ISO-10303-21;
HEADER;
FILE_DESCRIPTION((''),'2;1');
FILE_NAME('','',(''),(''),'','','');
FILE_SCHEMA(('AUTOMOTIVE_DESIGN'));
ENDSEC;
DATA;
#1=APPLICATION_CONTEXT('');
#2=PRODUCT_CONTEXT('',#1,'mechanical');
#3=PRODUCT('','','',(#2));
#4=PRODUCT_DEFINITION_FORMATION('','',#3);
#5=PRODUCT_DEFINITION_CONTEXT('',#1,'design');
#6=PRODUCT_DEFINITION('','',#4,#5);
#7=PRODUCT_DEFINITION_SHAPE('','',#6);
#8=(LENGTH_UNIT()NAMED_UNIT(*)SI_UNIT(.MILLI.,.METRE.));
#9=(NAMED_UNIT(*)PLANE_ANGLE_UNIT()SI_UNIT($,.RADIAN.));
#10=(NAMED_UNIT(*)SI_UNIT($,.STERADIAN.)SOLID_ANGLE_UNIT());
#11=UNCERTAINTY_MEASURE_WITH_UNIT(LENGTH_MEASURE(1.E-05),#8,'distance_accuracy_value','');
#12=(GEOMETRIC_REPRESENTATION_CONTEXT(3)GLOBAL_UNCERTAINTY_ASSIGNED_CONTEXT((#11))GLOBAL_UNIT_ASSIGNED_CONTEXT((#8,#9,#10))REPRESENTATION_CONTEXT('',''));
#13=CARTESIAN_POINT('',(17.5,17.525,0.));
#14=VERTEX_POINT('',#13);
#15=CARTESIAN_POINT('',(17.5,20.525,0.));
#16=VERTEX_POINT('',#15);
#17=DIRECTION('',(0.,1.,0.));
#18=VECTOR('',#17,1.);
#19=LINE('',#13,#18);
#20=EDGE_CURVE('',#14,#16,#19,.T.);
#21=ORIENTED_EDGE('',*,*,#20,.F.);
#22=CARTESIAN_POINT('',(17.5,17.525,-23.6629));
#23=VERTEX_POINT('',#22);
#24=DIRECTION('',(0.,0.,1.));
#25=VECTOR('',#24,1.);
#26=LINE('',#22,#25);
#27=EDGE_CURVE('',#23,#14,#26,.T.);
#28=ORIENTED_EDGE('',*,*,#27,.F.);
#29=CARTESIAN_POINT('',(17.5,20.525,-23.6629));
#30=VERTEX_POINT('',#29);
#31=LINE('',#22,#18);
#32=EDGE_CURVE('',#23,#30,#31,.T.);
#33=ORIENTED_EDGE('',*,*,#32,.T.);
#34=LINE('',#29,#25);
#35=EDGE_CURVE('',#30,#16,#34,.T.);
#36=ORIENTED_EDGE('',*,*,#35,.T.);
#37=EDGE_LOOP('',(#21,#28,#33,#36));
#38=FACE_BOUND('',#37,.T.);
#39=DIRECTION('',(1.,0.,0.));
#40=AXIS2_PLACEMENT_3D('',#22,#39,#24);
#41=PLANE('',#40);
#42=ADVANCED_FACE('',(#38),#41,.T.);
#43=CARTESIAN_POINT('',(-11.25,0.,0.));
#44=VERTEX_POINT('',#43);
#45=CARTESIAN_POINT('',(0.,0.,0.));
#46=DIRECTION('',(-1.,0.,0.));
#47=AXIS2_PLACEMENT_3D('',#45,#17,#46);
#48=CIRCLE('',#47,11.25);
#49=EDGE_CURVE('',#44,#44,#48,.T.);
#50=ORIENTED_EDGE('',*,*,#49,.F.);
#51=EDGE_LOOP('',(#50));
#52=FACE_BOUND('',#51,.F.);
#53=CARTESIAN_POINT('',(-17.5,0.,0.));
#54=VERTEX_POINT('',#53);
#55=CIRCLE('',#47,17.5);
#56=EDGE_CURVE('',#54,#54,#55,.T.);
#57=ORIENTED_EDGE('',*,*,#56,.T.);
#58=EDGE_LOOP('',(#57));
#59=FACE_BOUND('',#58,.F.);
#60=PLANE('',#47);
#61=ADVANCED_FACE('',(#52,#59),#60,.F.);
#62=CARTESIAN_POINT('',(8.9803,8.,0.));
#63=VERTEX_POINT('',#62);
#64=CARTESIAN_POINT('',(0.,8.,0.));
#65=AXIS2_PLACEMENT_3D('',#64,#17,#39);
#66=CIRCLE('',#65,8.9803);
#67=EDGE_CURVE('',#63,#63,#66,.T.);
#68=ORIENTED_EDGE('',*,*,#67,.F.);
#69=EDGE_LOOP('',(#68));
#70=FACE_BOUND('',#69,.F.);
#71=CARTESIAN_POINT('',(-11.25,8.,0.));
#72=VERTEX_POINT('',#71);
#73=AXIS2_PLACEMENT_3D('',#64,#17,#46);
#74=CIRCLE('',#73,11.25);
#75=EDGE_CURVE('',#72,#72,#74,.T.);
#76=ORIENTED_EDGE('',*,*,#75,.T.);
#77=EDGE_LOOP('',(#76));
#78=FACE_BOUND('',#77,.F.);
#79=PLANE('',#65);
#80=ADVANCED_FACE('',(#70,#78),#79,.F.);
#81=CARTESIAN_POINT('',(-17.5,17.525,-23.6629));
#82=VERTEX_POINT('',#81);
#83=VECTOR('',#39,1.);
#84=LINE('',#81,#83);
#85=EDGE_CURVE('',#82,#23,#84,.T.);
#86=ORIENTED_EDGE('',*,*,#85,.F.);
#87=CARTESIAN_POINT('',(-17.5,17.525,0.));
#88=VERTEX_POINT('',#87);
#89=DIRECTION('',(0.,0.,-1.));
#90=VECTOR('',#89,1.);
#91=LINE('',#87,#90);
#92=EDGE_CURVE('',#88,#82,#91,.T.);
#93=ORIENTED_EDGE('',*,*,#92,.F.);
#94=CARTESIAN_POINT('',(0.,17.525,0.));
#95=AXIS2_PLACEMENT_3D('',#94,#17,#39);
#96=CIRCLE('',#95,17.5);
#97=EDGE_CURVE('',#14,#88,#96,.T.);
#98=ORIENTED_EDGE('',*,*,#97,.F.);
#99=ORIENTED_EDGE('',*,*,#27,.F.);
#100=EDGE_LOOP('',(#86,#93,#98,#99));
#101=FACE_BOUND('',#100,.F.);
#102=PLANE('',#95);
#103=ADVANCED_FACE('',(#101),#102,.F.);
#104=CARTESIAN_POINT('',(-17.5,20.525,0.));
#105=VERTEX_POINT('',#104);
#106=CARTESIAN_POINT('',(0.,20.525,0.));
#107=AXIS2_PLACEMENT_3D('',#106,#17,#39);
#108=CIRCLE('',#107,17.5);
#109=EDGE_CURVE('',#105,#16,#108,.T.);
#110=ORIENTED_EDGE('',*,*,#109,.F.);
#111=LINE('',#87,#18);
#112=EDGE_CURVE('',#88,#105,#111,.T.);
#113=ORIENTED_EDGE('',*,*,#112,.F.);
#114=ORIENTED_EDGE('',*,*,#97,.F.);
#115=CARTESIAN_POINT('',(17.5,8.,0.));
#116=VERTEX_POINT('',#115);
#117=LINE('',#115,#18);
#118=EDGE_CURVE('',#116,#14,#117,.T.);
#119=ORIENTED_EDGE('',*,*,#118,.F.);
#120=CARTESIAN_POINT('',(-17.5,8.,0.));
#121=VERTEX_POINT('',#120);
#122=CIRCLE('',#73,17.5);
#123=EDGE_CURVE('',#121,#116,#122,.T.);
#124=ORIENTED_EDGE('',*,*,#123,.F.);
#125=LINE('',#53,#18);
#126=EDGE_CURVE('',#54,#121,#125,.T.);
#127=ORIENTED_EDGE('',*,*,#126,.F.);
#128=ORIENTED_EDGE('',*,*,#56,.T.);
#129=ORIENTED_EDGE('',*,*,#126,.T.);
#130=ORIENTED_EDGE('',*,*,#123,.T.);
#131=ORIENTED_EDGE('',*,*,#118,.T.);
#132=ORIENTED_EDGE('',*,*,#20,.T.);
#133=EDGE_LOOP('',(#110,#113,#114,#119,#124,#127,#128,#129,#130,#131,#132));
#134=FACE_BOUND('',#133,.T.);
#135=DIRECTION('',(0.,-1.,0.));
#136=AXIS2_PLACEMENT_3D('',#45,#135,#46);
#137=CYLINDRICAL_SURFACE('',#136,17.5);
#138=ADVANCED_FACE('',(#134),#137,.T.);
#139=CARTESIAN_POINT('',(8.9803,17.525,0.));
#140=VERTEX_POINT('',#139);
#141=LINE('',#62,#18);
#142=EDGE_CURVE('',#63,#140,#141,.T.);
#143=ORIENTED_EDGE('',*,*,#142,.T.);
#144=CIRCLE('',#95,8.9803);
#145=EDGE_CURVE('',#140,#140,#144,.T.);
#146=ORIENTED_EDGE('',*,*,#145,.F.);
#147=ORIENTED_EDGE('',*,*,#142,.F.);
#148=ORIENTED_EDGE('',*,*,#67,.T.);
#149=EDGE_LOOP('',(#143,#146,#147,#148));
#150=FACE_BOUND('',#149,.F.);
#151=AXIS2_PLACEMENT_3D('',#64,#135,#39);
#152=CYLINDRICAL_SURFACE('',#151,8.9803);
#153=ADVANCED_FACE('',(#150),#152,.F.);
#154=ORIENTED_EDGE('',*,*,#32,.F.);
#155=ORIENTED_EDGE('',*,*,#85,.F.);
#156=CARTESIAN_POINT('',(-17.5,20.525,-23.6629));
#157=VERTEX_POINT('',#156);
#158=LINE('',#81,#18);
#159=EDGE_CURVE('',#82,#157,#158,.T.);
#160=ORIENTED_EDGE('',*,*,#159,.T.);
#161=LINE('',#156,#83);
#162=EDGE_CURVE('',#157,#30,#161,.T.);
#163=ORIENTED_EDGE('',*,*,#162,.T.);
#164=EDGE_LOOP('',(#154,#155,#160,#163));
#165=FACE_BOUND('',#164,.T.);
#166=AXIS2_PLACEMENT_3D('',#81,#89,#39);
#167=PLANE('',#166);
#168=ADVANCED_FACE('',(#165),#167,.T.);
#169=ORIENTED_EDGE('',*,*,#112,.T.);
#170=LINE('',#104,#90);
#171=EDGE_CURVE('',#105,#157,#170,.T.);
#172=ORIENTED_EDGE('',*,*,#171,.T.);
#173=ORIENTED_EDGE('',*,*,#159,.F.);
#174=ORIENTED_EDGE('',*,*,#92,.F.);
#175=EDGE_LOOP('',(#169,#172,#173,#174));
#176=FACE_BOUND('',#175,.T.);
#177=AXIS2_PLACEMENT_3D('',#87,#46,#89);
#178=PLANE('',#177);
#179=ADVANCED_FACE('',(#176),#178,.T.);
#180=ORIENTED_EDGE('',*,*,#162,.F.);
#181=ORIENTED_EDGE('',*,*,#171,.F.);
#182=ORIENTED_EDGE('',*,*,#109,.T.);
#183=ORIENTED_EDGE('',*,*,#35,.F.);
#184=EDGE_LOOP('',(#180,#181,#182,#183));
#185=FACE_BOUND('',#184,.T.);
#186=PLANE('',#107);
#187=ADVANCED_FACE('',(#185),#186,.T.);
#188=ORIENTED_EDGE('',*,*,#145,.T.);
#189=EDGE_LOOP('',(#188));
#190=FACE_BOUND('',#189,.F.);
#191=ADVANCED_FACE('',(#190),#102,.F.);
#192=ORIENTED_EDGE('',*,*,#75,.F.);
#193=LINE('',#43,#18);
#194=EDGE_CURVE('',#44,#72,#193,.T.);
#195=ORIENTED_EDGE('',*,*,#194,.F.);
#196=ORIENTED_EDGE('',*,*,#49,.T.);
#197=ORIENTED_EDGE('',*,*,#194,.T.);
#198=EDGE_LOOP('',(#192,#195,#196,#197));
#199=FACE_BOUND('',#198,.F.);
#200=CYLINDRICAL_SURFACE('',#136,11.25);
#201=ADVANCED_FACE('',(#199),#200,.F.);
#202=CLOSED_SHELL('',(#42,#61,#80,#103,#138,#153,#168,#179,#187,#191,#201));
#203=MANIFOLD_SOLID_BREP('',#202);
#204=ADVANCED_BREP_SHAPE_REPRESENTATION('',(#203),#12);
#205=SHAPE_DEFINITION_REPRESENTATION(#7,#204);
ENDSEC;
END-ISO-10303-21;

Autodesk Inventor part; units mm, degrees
ref_plane "YZ Plane" through (0, 0, 0) normal (1, 0, 0) x (0, 1, 0)
ref_plane "XZ Plane" through (0, 0, 0) normal (0, 1, 0) x (-1, 0, 0)
ref_plane "XY Plane" through (0, 0, 0) normal (0, 0, 1) x (1, 0, 0)
sketch "Sketch1" plane through (0, 0, 0) normal (0, 1, 0) x (-1, 0, 0)
  circle A0 centre (0, 0) radius 11.25
  circle A1 centre (0, 0) radius 17.5
  dimension "d0" = 22.5
  dimension "d1" = 35
extrude "Extrusion1" add sketch "Sketch1" along normal blind 8
sketch "Sketch2" plane through (0, 8, 0) normal (0, 1, 0) x (1, 0, 0)
  circle A0 centre (0, 0) radius 17.5
  circle A1 centre (0, 0) radius 8.9803
extrude "Extrusion2" add sketch "Sketch2" along normal blind 9.525
sketch "Sketch3" plane through (0, 17.525, 0) normal (0, 1, 0) x (1, 0, 0)
  circle A0 centre (0, 0) radius 17.5 projected
  line L0 (-17.5, 0) -> (-17.5, 23.6629)
  line L1 (-17.5, 23.6629) -> (17.5, 23.6629)
  line L2 (17.5, 23.6629) -> (17.5, 0)
  arc A1 (-17.5, 0) -> (17.5, 0) centre (0, 0) ccw
extrude "Extrusion3" add sketch "Sketch3" along normal blind 3
properties part number "hubholder"
